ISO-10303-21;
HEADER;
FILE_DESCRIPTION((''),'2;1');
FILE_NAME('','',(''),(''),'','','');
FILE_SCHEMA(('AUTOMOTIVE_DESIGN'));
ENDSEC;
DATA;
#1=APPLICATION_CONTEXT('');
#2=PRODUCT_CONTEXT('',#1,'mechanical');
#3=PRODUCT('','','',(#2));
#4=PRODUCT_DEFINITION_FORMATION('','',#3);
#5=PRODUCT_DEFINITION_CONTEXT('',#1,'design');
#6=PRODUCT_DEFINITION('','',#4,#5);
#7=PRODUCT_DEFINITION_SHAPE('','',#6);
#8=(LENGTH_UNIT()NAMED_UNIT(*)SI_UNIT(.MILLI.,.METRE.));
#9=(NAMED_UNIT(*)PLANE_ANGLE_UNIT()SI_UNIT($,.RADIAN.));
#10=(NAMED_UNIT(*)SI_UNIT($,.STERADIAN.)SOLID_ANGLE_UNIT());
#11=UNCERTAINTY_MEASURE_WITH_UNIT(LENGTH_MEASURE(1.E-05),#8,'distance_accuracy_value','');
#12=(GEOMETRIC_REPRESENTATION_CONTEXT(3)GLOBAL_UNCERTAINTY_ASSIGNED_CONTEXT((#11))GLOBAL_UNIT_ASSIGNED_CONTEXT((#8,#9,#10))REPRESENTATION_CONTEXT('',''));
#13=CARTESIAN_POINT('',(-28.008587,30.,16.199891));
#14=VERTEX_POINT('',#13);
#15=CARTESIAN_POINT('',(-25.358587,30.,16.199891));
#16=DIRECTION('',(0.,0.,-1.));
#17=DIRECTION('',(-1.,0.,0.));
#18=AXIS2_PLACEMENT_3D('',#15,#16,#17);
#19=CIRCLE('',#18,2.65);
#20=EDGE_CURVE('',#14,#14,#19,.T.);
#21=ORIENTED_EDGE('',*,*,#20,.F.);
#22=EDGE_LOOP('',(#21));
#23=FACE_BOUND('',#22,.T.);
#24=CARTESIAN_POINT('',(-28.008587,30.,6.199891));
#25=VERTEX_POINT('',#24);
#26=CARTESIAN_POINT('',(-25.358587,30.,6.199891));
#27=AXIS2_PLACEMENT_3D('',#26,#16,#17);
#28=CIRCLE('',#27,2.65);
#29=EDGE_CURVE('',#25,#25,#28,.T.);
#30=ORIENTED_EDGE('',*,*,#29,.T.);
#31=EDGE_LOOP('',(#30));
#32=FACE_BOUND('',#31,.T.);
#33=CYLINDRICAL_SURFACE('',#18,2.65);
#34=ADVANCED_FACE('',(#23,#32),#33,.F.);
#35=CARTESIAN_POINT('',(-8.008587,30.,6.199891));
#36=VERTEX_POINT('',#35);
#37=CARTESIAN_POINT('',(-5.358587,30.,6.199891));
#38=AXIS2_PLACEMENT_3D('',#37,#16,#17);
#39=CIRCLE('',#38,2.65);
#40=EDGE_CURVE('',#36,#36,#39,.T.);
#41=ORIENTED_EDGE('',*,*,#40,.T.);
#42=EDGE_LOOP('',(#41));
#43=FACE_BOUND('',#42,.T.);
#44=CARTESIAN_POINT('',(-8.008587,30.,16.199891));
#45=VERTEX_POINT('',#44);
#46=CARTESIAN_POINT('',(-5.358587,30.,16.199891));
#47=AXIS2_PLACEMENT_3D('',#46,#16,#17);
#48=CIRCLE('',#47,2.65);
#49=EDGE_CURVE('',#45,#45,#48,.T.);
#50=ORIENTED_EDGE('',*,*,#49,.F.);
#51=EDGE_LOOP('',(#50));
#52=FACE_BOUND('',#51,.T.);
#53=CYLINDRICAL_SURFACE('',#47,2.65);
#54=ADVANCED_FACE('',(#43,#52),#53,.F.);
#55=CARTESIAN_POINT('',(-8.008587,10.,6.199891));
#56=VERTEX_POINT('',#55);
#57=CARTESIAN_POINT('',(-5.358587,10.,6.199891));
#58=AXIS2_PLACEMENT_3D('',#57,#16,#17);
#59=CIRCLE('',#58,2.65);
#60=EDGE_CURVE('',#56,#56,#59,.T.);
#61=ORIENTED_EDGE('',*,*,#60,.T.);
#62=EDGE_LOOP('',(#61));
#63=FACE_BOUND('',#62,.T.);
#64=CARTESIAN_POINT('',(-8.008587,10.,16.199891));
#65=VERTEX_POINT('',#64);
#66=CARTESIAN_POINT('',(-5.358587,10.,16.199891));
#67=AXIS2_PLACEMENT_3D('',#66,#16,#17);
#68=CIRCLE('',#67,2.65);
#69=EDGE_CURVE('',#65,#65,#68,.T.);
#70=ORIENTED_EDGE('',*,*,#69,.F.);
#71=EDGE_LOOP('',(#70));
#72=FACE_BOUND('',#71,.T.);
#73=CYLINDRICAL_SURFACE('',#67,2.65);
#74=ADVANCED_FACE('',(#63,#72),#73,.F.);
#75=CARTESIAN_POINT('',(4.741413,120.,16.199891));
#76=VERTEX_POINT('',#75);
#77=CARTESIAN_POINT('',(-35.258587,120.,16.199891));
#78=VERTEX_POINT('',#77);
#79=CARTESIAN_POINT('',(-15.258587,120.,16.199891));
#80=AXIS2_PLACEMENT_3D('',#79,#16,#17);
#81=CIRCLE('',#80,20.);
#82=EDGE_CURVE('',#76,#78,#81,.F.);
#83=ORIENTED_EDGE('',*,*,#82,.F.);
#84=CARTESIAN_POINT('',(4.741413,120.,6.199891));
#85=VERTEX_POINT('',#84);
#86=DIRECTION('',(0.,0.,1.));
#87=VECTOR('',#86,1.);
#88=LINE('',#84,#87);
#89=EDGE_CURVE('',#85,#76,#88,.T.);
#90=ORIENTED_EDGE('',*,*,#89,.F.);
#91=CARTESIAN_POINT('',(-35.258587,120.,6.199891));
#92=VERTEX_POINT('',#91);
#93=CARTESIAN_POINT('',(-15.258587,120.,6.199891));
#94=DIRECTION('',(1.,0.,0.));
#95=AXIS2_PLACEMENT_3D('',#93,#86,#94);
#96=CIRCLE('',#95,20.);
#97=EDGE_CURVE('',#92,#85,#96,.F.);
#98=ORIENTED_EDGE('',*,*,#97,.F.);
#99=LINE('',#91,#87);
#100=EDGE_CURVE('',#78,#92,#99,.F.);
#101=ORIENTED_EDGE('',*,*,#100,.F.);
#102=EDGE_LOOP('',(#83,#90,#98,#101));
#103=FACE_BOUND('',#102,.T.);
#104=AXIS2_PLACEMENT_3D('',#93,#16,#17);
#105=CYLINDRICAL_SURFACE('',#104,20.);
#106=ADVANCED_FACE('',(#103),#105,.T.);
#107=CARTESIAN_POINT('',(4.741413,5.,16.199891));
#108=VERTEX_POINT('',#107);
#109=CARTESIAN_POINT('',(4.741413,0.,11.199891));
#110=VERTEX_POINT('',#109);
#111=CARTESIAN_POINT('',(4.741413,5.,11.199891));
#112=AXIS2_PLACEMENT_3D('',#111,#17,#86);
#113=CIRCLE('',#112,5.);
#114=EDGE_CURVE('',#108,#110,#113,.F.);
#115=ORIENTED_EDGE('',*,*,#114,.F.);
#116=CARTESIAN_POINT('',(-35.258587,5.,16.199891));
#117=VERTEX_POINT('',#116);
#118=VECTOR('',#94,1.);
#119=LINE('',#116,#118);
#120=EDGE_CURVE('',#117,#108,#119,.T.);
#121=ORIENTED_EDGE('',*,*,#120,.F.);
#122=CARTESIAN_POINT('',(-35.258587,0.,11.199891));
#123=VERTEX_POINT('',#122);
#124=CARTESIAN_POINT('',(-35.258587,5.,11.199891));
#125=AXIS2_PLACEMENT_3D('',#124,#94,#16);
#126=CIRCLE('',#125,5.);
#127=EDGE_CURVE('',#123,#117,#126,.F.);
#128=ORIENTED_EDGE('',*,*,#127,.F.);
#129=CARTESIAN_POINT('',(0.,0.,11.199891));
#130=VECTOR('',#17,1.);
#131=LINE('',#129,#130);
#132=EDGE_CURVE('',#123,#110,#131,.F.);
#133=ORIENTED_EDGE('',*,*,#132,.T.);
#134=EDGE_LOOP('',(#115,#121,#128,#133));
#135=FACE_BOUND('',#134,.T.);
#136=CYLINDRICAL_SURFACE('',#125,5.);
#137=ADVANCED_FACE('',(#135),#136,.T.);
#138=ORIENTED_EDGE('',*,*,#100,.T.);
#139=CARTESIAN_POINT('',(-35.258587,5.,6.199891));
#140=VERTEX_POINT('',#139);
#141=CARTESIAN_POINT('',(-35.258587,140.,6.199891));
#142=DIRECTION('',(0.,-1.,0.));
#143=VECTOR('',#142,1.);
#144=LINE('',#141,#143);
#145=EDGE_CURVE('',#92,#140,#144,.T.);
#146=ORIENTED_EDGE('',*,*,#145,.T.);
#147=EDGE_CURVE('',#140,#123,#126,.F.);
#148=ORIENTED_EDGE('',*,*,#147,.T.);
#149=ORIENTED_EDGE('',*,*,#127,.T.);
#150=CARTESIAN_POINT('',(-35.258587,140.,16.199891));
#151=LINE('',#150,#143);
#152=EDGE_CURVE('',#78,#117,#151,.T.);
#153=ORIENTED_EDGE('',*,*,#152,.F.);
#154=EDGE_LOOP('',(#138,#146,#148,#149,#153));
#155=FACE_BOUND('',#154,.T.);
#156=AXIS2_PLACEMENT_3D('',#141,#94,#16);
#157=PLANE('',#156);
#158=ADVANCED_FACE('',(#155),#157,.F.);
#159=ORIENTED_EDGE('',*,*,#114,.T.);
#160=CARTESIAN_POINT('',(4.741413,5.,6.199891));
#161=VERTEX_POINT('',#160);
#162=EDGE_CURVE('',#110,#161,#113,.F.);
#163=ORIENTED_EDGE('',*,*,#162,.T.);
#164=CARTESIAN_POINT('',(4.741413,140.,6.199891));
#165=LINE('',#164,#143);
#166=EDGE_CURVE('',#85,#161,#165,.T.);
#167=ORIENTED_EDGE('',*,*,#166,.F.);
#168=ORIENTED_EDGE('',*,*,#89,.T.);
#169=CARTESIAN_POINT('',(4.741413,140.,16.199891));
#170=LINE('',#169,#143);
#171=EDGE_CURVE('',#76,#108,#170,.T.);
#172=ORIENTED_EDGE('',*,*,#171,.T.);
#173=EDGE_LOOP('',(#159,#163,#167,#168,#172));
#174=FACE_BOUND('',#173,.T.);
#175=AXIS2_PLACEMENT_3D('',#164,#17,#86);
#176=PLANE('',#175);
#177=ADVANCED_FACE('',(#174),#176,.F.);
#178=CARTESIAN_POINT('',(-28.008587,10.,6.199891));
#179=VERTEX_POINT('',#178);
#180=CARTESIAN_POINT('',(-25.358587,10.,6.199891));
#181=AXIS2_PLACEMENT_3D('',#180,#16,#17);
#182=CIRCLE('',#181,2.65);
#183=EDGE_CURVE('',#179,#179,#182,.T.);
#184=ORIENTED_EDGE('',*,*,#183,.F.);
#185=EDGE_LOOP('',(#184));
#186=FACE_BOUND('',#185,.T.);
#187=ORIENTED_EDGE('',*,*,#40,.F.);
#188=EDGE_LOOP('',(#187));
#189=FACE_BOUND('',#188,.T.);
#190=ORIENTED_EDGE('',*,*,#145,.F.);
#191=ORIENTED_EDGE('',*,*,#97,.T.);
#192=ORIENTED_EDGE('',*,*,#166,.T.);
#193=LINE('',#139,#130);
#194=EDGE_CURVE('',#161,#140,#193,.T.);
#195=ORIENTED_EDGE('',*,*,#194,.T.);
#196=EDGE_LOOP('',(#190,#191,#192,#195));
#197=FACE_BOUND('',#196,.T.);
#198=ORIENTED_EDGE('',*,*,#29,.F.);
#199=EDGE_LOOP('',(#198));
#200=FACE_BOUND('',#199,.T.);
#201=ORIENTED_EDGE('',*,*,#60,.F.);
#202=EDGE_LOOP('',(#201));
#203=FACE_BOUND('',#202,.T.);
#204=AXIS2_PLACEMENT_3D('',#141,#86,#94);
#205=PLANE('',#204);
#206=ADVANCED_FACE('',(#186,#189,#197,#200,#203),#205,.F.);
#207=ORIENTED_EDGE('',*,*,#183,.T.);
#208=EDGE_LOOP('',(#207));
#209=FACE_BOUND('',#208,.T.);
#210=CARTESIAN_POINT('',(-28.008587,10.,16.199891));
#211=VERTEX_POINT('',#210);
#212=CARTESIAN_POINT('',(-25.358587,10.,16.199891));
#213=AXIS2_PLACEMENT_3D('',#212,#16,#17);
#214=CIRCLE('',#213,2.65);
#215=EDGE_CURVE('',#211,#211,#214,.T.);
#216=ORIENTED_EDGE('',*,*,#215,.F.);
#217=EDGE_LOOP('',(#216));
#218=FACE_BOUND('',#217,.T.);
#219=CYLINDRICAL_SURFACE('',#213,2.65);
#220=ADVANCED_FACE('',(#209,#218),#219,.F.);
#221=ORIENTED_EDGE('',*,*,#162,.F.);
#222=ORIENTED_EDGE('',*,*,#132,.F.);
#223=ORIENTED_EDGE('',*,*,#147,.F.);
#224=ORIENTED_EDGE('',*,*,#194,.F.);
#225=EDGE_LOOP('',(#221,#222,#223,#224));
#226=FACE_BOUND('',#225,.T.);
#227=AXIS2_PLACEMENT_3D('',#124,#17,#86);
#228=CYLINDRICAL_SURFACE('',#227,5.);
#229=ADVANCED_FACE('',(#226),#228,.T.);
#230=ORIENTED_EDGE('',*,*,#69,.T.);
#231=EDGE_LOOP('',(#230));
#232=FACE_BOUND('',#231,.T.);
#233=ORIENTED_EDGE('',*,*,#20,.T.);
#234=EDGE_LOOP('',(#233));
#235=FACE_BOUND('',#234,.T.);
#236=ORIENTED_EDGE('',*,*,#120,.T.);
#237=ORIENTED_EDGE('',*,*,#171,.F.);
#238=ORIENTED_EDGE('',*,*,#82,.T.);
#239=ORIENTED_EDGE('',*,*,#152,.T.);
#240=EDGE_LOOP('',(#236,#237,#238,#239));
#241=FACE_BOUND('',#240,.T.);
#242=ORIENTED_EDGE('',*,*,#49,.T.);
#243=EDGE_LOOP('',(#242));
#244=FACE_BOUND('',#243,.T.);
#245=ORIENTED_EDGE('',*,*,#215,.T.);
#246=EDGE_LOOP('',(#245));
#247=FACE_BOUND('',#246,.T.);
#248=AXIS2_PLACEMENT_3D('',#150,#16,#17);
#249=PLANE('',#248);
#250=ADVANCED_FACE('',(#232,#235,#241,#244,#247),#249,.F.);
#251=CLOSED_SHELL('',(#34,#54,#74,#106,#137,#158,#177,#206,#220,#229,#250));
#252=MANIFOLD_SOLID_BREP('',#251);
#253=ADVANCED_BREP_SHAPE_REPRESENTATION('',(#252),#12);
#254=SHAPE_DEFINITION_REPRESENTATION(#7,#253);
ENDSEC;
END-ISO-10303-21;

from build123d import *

# Parameters (mm, degrees)
SKETCH1_W           = 40
SKETCH1_H           = 10
BOSS_EXTRUDE1_DEPTH = 140
FILLET4_RADIUS      = 20
FILLET4_LENGTH      = 10
SKETCH2_R           = 2.65
CUT_EXTRUDE1_DEPTH  = 10
FILLET5_R           = 5


with BuildPart() as part:
    # Sketch1 → Boss-Extrude1 (new body)
    with BuildSketch(Plane(origin=(0, 0, 0), x_dir=(1, 0, 0), z_dir=(0, 1, 0))):
        with Locations((-15.258586642, -11.19989116)):
            Rectangle(SKETCH1_W, SKETCH1_H)
    extrude(amount=BOSS_EXTRUDE1_DEPTH)

    # Fillet4: full round fillet: the end face becomes a half cylinder, R = half its width
    fillet4_face = Plane((-15.258586642, 140, 11.19989116), x_dir=(0, 0, -1), z_dir=(0, 1, 0))  # on the end face: x along it, z out of the body
    fillet4_slab = fillet4_face.offset(-FILLET4_RADIUS / 2) * Box(FILLET4_LENGTH, 2 * FILLET4_RADIUS, FILLET4_RADIUS, mode=Mode.PRIVATE)  # the body's end, R deep
    fillet4_round = Plane((-15.258586642, 120, 11.19989116), x_dir=(0, 1, 0), z_dir=(0, 0, -1)) * Cylinder(FILLET4_RADIUS, FILLET4_LENGTH, mode=Mode.PRIVATE)  # its axis R under the face
    add(fillet4_slab - fillet4_round, mode=Mode.SUBTRACT)

    # Sketch2 → Cut-Extrude1 (cut)
    with BuildSketch(Plane(origin=(0, 0, 6.19989116), x_dir=(-1, 0, 0), z_dir=(0, 0, -1))):
        with Locations((5.358586642, 10)):
            Circle(SKETCH2_R)
        with Locations((25.358586642, 10)):
            Circle(SKETCH2_R)
        with Locations((25.358586642, 30)):
            Circle(SKETCH2_R)
        with Locations((5.358586642, 30)):
            Circle(SKETCH2_R)
    extrude(amount=-CUT_EXTRUDE1_DEPTH, mode=Mode.SUBTRACT)

    # Fillet5
    fillet5_edges = [part.edges().sort_by_distance(p)[0] for p in [
        (-15.258586642, 0, 16.19989116),
        (-15.258586642, 0, 6.19989116),
    ]]
    fillet(fillet5_edges, radius=FILLET5_R - 0.0001)  # a hair under: the kernel refuses the full size


solid = part.part
